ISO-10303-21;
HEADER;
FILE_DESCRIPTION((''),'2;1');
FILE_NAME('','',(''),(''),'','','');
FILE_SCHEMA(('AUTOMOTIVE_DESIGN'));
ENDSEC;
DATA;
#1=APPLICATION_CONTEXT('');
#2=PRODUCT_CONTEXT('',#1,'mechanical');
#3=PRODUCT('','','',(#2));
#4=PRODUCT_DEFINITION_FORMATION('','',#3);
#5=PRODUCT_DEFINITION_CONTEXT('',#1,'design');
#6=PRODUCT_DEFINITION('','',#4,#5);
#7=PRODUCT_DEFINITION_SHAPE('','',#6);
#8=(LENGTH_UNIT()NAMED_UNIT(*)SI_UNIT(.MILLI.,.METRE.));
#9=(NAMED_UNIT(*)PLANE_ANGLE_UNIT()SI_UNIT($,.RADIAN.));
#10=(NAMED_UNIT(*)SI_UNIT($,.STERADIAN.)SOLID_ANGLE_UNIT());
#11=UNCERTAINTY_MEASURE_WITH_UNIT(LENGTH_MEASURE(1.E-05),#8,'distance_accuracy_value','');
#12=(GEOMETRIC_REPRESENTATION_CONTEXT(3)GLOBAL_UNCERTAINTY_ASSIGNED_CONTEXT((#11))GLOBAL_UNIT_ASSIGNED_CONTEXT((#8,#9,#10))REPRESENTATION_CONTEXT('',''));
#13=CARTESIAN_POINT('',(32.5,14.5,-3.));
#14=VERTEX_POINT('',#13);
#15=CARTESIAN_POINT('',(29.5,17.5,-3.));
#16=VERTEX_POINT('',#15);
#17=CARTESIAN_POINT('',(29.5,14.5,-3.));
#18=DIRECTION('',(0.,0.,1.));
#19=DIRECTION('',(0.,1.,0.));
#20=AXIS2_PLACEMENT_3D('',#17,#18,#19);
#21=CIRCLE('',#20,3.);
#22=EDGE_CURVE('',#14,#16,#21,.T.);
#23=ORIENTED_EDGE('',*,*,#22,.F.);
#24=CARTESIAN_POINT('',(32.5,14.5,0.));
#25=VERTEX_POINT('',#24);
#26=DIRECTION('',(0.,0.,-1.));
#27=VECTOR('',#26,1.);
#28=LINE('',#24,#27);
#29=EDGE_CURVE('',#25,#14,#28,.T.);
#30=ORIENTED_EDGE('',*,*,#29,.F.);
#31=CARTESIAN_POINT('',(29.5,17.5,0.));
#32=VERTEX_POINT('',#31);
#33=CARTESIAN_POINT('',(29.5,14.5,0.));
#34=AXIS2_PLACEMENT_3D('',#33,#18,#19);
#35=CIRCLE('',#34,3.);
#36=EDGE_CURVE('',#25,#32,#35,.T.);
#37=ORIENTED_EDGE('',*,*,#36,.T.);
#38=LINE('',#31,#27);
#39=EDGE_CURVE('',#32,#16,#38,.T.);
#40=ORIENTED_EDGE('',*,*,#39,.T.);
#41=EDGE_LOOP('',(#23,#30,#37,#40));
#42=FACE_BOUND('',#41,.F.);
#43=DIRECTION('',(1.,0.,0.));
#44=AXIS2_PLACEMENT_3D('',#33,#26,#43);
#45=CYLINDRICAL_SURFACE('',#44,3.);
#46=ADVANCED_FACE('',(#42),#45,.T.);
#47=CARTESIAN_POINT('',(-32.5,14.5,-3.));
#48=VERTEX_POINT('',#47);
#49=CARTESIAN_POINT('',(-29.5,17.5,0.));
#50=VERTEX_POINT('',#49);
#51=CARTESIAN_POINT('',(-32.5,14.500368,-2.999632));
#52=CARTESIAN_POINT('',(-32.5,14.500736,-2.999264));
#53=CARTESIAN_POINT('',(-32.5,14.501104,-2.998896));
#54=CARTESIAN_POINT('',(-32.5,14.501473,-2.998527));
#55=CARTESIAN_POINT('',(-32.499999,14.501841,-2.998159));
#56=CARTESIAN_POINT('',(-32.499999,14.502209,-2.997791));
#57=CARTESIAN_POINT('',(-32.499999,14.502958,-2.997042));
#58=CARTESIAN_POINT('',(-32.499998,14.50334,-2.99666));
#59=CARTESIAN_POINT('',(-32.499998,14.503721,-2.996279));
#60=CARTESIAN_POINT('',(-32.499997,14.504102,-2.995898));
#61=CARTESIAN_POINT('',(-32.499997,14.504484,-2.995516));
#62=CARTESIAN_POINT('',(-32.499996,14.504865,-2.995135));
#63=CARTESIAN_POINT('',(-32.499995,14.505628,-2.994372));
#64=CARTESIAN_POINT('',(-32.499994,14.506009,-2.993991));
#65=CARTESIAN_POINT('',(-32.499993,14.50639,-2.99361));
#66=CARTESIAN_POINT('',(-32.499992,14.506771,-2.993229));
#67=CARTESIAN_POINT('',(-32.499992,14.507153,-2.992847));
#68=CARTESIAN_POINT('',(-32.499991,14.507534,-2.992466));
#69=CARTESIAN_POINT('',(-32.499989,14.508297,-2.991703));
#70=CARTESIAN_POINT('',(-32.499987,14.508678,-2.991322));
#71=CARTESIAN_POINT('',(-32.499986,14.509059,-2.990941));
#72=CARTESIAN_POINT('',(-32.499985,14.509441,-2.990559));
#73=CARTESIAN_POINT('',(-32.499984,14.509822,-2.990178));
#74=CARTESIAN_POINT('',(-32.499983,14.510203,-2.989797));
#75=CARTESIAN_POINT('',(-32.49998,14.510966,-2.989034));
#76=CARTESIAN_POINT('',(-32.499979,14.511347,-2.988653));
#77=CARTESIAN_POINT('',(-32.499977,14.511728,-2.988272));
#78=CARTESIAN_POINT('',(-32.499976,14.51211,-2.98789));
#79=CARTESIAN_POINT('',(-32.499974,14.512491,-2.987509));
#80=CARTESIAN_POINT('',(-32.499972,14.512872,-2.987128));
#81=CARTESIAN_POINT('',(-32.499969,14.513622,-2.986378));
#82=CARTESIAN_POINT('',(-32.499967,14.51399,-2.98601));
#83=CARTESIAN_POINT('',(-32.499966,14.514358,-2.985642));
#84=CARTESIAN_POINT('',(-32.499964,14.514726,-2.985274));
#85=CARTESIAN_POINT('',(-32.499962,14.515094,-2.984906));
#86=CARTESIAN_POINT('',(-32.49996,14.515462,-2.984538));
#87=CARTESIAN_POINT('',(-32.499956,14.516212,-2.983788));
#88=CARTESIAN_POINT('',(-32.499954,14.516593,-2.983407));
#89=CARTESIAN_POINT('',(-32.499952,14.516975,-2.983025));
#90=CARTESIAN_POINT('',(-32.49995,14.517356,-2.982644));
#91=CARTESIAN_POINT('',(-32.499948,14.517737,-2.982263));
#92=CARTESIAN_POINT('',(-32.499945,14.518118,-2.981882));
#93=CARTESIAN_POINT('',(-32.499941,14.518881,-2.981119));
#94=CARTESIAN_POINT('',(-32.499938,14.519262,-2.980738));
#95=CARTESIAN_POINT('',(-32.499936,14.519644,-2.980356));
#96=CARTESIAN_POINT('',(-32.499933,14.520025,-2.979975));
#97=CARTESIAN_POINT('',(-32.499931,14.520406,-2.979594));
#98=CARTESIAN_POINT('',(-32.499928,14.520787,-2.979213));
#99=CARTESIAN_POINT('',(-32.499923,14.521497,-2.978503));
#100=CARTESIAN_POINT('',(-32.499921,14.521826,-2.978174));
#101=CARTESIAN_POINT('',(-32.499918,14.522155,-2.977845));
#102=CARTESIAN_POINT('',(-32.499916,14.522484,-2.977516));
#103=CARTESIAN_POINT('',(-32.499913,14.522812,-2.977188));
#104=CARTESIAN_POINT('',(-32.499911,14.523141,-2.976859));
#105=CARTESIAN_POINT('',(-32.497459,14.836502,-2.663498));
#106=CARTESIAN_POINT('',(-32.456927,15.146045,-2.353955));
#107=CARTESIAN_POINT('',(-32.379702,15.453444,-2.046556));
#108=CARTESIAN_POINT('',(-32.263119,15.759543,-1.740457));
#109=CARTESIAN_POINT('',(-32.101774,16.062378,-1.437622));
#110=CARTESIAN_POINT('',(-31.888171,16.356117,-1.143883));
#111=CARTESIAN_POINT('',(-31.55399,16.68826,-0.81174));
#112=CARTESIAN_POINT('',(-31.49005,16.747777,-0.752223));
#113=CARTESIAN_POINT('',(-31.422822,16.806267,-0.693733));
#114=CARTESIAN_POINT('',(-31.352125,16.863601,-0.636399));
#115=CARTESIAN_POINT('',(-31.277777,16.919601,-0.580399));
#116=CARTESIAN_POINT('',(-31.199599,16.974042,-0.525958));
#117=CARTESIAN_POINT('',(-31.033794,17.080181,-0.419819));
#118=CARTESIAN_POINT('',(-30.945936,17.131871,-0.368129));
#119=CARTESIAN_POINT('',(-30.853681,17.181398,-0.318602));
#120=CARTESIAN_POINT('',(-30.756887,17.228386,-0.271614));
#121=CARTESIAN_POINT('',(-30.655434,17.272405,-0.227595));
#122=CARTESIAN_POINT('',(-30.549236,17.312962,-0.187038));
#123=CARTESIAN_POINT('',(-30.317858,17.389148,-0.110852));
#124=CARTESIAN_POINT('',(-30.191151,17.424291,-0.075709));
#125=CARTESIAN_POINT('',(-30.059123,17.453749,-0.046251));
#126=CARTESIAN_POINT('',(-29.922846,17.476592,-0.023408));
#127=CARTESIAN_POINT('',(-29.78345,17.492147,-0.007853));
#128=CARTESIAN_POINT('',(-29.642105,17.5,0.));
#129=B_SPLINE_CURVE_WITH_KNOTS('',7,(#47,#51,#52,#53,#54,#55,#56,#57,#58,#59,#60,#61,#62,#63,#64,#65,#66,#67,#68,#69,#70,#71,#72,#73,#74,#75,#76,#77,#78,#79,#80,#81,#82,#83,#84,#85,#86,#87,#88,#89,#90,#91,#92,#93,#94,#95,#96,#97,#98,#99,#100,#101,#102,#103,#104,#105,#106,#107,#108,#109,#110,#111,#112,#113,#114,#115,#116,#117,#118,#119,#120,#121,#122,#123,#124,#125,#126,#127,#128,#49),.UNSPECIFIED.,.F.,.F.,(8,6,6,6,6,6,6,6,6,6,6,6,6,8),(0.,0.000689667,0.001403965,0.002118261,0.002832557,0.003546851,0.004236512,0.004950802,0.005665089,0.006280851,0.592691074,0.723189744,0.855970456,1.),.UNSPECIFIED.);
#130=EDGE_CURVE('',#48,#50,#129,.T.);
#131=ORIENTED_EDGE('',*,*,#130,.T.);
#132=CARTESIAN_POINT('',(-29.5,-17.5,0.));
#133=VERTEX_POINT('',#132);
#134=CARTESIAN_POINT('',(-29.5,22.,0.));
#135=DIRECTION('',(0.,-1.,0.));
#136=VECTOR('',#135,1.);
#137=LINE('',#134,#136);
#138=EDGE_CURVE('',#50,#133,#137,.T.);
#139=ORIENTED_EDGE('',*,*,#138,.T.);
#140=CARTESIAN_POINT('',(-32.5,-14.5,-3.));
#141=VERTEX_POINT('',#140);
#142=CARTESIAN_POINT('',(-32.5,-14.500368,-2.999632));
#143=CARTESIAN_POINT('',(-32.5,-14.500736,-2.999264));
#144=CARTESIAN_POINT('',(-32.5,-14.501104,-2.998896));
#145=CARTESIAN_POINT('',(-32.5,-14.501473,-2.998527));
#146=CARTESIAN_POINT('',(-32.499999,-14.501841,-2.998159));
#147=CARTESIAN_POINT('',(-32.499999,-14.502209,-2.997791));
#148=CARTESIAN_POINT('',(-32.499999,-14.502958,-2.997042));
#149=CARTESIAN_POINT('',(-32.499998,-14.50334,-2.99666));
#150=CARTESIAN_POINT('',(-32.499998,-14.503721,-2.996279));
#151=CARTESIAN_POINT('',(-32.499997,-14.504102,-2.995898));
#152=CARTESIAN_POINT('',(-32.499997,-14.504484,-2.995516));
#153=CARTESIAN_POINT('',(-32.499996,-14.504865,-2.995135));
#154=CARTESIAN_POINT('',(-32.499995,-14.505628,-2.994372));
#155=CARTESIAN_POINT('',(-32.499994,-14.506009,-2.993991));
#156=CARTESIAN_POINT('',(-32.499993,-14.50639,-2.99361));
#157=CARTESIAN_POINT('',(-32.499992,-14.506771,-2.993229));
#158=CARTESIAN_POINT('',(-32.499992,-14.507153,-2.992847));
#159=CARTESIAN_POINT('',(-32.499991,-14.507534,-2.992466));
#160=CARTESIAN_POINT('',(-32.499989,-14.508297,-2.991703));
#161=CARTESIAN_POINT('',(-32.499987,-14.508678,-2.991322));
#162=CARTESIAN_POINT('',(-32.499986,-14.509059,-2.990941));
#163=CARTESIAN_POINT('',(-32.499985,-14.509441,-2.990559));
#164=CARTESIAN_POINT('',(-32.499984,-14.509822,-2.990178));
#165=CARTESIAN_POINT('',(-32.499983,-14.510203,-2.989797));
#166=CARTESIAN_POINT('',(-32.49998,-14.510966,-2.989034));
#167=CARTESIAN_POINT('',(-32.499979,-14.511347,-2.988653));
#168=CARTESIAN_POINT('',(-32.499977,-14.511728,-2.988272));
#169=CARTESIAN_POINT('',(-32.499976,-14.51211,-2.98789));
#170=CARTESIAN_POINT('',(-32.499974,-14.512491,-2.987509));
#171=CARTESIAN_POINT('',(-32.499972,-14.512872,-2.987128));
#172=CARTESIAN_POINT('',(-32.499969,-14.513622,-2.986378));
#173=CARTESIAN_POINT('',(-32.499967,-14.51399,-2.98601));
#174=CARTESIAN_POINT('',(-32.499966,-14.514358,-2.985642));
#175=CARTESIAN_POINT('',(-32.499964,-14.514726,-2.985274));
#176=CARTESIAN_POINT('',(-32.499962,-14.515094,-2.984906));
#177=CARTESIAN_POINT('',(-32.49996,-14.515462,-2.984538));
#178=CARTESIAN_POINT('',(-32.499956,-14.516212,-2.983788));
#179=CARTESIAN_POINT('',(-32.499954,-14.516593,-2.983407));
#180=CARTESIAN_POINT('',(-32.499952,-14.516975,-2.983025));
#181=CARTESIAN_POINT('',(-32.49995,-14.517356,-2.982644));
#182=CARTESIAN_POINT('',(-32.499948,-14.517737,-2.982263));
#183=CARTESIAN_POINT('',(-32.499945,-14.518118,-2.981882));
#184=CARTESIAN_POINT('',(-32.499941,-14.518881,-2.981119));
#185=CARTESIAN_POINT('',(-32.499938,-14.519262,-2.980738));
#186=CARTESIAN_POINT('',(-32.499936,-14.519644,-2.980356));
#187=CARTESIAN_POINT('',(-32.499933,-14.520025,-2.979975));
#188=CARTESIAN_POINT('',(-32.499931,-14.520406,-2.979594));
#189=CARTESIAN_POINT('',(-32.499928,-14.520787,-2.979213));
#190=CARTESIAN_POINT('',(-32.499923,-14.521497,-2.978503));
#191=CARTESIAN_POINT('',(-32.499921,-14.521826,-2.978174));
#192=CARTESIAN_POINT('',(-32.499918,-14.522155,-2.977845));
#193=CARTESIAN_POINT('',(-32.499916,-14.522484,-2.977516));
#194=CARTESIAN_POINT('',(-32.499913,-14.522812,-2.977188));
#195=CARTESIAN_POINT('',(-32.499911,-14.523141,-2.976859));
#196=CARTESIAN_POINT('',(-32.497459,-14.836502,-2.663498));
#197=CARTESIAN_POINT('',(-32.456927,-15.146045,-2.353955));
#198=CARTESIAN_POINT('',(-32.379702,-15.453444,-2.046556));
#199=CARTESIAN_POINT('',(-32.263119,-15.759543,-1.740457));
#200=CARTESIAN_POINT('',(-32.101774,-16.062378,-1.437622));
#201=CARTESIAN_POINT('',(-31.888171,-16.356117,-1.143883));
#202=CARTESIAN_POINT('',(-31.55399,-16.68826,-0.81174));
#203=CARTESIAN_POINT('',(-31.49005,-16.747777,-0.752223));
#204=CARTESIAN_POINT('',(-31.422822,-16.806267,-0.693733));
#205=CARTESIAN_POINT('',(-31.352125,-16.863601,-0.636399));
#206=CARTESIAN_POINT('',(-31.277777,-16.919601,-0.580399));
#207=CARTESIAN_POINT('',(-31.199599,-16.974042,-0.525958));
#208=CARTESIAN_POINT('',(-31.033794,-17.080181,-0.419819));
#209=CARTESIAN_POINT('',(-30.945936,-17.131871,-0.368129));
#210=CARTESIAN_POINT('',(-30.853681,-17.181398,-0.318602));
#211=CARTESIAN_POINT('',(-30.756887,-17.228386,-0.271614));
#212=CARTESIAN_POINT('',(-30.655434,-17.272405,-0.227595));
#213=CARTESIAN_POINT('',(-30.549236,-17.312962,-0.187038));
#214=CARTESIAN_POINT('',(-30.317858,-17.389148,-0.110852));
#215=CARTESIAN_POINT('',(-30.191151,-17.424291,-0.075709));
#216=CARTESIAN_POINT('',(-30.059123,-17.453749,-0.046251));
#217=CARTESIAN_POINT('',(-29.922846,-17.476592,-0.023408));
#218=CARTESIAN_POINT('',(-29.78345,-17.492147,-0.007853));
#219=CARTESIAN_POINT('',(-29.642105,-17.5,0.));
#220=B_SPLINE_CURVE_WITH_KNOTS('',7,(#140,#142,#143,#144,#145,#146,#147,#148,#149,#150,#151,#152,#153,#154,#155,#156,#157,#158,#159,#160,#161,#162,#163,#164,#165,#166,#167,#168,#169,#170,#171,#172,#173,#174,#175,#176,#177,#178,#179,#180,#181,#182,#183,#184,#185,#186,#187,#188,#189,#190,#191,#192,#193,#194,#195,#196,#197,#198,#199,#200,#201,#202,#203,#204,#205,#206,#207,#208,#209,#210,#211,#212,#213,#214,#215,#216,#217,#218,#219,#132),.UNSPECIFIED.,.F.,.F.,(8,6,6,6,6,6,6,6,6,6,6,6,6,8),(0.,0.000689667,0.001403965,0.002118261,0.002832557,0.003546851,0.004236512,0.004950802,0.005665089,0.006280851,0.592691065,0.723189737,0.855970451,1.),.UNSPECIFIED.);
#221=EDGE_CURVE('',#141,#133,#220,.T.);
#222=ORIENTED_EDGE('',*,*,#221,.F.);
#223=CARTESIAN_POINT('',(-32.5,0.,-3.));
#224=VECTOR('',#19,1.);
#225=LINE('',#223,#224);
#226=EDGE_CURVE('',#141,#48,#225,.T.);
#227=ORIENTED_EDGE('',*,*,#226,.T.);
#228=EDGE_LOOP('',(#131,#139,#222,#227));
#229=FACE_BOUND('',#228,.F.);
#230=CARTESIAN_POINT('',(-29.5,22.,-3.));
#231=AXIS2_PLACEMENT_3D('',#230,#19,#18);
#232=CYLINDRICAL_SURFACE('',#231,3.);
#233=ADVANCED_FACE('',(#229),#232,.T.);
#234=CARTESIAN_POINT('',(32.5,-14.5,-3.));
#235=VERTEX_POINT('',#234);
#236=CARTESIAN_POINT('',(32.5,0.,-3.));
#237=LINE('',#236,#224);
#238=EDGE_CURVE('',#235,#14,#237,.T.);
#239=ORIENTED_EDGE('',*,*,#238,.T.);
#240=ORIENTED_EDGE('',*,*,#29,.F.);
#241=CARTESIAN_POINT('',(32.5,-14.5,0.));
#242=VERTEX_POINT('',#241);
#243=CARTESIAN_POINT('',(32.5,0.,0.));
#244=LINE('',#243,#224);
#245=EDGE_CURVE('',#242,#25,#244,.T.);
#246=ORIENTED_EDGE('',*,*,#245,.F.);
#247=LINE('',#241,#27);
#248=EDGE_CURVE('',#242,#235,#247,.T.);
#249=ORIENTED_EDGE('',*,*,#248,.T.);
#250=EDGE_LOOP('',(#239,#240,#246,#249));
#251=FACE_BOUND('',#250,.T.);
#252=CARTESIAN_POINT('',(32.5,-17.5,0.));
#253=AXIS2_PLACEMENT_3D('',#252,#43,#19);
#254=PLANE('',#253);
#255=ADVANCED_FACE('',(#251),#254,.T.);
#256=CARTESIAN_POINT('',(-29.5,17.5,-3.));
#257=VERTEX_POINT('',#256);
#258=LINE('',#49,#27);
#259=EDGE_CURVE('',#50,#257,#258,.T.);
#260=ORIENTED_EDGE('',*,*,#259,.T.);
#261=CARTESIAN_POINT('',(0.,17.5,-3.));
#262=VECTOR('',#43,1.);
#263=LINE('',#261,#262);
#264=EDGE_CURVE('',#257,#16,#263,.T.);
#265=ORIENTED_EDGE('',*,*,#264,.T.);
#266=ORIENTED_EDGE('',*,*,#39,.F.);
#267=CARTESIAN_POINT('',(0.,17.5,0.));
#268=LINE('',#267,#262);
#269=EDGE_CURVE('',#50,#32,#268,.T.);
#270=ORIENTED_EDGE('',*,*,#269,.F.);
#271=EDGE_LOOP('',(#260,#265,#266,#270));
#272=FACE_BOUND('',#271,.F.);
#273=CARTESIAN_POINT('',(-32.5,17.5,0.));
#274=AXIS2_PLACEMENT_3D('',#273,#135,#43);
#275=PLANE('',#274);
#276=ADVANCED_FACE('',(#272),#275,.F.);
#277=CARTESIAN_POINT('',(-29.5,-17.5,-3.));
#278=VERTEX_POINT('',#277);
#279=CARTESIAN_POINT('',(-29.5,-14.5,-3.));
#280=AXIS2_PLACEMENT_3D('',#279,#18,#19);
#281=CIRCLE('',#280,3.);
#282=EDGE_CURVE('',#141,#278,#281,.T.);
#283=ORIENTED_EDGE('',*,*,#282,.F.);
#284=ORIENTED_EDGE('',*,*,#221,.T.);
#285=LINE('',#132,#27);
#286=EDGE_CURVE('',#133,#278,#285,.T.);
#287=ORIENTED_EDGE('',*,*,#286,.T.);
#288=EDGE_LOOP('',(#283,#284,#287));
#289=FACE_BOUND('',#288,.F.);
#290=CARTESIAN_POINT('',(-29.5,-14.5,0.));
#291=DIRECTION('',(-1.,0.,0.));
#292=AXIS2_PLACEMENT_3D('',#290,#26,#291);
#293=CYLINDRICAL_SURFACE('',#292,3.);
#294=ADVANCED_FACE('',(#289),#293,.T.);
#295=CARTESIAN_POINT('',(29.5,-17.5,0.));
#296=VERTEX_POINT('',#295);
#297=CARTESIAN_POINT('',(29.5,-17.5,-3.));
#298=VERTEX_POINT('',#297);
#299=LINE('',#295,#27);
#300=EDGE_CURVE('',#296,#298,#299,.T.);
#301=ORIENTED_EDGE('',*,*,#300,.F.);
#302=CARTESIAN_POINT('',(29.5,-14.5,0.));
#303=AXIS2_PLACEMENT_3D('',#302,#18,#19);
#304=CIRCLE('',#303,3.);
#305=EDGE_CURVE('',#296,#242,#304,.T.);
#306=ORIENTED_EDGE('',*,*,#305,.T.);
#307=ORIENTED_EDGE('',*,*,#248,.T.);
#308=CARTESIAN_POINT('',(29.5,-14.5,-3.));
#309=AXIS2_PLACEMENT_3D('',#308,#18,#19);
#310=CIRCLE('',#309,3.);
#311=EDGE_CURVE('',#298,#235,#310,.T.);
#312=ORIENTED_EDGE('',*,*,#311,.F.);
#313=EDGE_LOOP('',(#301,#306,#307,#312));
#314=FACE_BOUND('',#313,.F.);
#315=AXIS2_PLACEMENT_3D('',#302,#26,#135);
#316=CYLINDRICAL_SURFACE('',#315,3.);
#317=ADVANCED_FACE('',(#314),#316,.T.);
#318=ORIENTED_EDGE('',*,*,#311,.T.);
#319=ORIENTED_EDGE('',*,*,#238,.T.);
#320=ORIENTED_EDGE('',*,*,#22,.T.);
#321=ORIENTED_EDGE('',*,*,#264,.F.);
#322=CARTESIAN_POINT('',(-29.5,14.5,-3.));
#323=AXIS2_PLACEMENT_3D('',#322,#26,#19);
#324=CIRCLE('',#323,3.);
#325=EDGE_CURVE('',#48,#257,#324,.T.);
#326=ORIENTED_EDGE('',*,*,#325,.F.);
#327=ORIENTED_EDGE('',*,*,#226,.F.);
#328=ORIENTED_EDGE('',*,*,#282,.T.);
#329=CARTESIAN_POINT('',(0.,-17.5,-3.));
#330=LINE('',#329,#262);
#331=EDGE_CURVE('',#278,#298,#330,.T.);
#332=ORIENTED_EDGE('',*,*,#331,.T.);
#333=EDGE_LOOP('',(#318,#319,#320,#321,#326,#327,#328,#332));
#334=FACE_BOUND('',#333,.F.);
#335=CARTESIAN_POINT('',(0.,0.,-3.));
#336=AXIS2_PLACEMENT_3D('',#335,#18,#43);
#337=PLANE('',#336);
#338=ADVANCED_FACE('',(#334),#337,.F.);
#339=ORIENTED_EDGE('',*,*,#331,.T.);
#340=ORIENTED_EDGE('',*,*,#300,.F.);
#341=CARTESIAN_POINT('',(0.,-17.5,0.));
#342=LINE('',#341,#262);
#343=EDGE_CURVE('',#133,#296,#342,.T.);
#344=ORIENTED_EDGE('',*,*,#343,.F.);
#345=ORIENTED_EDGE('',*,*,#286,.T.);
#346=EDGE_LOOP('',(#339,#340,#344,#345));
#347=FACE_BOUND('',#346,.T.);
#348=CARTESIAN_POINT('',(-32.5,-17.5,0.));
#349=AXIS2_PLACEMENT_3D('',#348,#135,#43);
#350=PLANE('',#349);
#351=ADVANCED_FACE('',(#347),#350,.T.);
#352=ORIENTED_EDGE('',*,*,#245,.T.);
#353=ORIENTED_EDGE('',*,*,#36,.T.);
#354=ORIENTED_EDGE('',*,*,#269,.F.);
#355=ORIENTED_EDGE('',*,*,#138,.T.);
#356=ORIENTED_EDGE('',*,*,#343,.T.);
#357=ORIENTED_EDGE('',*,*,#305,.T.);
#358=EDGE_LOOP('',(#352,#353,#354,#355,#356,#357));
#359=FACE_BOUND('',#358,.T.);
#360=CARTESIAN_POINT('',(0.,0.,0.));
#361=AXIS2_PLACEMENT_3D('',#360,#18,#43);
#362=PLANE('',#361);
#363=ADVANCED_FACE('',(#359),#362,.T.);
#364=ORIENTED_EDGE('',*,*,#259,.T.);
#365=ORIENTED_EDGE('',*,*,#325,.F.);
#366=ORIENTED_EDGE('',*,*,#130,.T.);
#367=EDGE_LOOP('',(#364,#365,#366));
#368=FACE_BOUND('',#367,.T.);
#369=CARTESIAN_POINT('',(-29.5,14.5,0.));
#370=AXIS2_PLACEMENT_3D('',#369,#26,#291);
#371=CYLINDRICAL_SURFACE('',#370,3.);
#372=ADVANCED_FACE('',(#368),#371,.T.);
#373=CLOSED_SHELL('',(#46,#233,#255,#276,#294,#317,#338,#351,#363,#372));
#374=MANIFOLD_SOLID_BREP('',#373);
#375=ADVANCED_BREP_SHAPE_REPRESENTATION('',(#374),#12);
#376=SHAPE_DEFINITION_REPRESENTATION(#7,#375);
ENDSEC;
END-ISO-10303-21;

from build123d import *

# Parameters (mm, degrees)
F0_W        = 65
F0_H        = 35
F1_DEPTH    = 3
F2_R        = 3
F3_T1_DEPTH = 44


# Not quite as in the source:
# - a fillet or chamfer that OpenCascade refuses, or shapes differently, is made with other operations: its cross-section is extruded or revolved along the edge and cut away or added


with BuildPart() as f1:
    # F0 (on Top) → F1 (new body)
    with BuildSketch(Plane.XY):
        Rectangle(F0_W, F0_H)
    extrude(amount=-F1_DEPTH)

    # F2
    f2_edges = [f1.edges().sort_by_distance(p)[0] for p in [
        (-32.5, -17.5, -1.5),
        (-32.5, 17.5, -1.5),
        (32.5, 17.5, -1.5),
        (32.5, -17.5, -1.5),
    ]]
    fillet(f2_edges, radius=F2_R)

    # F3: fillet of radius 3 on 1 edges, made by hand

    # F3_s2 → F3_t1 (cut)
    with BuildSketch(Plane.XZ.offset(-22)):
        with BuildLine():
            ThreePointArc((-29.5, 0), (-31.6213203436, -0.8786796564), (-32.5, -3))
            Line((-32.5, -3), (-32.5, 0))
            Line((-32.5, 0), (-29.5, 0))
        make_face()
    extrude(amount=F3_T1_DEPTH, mode=Mode.SUBTRACT)


solid = f1.part
